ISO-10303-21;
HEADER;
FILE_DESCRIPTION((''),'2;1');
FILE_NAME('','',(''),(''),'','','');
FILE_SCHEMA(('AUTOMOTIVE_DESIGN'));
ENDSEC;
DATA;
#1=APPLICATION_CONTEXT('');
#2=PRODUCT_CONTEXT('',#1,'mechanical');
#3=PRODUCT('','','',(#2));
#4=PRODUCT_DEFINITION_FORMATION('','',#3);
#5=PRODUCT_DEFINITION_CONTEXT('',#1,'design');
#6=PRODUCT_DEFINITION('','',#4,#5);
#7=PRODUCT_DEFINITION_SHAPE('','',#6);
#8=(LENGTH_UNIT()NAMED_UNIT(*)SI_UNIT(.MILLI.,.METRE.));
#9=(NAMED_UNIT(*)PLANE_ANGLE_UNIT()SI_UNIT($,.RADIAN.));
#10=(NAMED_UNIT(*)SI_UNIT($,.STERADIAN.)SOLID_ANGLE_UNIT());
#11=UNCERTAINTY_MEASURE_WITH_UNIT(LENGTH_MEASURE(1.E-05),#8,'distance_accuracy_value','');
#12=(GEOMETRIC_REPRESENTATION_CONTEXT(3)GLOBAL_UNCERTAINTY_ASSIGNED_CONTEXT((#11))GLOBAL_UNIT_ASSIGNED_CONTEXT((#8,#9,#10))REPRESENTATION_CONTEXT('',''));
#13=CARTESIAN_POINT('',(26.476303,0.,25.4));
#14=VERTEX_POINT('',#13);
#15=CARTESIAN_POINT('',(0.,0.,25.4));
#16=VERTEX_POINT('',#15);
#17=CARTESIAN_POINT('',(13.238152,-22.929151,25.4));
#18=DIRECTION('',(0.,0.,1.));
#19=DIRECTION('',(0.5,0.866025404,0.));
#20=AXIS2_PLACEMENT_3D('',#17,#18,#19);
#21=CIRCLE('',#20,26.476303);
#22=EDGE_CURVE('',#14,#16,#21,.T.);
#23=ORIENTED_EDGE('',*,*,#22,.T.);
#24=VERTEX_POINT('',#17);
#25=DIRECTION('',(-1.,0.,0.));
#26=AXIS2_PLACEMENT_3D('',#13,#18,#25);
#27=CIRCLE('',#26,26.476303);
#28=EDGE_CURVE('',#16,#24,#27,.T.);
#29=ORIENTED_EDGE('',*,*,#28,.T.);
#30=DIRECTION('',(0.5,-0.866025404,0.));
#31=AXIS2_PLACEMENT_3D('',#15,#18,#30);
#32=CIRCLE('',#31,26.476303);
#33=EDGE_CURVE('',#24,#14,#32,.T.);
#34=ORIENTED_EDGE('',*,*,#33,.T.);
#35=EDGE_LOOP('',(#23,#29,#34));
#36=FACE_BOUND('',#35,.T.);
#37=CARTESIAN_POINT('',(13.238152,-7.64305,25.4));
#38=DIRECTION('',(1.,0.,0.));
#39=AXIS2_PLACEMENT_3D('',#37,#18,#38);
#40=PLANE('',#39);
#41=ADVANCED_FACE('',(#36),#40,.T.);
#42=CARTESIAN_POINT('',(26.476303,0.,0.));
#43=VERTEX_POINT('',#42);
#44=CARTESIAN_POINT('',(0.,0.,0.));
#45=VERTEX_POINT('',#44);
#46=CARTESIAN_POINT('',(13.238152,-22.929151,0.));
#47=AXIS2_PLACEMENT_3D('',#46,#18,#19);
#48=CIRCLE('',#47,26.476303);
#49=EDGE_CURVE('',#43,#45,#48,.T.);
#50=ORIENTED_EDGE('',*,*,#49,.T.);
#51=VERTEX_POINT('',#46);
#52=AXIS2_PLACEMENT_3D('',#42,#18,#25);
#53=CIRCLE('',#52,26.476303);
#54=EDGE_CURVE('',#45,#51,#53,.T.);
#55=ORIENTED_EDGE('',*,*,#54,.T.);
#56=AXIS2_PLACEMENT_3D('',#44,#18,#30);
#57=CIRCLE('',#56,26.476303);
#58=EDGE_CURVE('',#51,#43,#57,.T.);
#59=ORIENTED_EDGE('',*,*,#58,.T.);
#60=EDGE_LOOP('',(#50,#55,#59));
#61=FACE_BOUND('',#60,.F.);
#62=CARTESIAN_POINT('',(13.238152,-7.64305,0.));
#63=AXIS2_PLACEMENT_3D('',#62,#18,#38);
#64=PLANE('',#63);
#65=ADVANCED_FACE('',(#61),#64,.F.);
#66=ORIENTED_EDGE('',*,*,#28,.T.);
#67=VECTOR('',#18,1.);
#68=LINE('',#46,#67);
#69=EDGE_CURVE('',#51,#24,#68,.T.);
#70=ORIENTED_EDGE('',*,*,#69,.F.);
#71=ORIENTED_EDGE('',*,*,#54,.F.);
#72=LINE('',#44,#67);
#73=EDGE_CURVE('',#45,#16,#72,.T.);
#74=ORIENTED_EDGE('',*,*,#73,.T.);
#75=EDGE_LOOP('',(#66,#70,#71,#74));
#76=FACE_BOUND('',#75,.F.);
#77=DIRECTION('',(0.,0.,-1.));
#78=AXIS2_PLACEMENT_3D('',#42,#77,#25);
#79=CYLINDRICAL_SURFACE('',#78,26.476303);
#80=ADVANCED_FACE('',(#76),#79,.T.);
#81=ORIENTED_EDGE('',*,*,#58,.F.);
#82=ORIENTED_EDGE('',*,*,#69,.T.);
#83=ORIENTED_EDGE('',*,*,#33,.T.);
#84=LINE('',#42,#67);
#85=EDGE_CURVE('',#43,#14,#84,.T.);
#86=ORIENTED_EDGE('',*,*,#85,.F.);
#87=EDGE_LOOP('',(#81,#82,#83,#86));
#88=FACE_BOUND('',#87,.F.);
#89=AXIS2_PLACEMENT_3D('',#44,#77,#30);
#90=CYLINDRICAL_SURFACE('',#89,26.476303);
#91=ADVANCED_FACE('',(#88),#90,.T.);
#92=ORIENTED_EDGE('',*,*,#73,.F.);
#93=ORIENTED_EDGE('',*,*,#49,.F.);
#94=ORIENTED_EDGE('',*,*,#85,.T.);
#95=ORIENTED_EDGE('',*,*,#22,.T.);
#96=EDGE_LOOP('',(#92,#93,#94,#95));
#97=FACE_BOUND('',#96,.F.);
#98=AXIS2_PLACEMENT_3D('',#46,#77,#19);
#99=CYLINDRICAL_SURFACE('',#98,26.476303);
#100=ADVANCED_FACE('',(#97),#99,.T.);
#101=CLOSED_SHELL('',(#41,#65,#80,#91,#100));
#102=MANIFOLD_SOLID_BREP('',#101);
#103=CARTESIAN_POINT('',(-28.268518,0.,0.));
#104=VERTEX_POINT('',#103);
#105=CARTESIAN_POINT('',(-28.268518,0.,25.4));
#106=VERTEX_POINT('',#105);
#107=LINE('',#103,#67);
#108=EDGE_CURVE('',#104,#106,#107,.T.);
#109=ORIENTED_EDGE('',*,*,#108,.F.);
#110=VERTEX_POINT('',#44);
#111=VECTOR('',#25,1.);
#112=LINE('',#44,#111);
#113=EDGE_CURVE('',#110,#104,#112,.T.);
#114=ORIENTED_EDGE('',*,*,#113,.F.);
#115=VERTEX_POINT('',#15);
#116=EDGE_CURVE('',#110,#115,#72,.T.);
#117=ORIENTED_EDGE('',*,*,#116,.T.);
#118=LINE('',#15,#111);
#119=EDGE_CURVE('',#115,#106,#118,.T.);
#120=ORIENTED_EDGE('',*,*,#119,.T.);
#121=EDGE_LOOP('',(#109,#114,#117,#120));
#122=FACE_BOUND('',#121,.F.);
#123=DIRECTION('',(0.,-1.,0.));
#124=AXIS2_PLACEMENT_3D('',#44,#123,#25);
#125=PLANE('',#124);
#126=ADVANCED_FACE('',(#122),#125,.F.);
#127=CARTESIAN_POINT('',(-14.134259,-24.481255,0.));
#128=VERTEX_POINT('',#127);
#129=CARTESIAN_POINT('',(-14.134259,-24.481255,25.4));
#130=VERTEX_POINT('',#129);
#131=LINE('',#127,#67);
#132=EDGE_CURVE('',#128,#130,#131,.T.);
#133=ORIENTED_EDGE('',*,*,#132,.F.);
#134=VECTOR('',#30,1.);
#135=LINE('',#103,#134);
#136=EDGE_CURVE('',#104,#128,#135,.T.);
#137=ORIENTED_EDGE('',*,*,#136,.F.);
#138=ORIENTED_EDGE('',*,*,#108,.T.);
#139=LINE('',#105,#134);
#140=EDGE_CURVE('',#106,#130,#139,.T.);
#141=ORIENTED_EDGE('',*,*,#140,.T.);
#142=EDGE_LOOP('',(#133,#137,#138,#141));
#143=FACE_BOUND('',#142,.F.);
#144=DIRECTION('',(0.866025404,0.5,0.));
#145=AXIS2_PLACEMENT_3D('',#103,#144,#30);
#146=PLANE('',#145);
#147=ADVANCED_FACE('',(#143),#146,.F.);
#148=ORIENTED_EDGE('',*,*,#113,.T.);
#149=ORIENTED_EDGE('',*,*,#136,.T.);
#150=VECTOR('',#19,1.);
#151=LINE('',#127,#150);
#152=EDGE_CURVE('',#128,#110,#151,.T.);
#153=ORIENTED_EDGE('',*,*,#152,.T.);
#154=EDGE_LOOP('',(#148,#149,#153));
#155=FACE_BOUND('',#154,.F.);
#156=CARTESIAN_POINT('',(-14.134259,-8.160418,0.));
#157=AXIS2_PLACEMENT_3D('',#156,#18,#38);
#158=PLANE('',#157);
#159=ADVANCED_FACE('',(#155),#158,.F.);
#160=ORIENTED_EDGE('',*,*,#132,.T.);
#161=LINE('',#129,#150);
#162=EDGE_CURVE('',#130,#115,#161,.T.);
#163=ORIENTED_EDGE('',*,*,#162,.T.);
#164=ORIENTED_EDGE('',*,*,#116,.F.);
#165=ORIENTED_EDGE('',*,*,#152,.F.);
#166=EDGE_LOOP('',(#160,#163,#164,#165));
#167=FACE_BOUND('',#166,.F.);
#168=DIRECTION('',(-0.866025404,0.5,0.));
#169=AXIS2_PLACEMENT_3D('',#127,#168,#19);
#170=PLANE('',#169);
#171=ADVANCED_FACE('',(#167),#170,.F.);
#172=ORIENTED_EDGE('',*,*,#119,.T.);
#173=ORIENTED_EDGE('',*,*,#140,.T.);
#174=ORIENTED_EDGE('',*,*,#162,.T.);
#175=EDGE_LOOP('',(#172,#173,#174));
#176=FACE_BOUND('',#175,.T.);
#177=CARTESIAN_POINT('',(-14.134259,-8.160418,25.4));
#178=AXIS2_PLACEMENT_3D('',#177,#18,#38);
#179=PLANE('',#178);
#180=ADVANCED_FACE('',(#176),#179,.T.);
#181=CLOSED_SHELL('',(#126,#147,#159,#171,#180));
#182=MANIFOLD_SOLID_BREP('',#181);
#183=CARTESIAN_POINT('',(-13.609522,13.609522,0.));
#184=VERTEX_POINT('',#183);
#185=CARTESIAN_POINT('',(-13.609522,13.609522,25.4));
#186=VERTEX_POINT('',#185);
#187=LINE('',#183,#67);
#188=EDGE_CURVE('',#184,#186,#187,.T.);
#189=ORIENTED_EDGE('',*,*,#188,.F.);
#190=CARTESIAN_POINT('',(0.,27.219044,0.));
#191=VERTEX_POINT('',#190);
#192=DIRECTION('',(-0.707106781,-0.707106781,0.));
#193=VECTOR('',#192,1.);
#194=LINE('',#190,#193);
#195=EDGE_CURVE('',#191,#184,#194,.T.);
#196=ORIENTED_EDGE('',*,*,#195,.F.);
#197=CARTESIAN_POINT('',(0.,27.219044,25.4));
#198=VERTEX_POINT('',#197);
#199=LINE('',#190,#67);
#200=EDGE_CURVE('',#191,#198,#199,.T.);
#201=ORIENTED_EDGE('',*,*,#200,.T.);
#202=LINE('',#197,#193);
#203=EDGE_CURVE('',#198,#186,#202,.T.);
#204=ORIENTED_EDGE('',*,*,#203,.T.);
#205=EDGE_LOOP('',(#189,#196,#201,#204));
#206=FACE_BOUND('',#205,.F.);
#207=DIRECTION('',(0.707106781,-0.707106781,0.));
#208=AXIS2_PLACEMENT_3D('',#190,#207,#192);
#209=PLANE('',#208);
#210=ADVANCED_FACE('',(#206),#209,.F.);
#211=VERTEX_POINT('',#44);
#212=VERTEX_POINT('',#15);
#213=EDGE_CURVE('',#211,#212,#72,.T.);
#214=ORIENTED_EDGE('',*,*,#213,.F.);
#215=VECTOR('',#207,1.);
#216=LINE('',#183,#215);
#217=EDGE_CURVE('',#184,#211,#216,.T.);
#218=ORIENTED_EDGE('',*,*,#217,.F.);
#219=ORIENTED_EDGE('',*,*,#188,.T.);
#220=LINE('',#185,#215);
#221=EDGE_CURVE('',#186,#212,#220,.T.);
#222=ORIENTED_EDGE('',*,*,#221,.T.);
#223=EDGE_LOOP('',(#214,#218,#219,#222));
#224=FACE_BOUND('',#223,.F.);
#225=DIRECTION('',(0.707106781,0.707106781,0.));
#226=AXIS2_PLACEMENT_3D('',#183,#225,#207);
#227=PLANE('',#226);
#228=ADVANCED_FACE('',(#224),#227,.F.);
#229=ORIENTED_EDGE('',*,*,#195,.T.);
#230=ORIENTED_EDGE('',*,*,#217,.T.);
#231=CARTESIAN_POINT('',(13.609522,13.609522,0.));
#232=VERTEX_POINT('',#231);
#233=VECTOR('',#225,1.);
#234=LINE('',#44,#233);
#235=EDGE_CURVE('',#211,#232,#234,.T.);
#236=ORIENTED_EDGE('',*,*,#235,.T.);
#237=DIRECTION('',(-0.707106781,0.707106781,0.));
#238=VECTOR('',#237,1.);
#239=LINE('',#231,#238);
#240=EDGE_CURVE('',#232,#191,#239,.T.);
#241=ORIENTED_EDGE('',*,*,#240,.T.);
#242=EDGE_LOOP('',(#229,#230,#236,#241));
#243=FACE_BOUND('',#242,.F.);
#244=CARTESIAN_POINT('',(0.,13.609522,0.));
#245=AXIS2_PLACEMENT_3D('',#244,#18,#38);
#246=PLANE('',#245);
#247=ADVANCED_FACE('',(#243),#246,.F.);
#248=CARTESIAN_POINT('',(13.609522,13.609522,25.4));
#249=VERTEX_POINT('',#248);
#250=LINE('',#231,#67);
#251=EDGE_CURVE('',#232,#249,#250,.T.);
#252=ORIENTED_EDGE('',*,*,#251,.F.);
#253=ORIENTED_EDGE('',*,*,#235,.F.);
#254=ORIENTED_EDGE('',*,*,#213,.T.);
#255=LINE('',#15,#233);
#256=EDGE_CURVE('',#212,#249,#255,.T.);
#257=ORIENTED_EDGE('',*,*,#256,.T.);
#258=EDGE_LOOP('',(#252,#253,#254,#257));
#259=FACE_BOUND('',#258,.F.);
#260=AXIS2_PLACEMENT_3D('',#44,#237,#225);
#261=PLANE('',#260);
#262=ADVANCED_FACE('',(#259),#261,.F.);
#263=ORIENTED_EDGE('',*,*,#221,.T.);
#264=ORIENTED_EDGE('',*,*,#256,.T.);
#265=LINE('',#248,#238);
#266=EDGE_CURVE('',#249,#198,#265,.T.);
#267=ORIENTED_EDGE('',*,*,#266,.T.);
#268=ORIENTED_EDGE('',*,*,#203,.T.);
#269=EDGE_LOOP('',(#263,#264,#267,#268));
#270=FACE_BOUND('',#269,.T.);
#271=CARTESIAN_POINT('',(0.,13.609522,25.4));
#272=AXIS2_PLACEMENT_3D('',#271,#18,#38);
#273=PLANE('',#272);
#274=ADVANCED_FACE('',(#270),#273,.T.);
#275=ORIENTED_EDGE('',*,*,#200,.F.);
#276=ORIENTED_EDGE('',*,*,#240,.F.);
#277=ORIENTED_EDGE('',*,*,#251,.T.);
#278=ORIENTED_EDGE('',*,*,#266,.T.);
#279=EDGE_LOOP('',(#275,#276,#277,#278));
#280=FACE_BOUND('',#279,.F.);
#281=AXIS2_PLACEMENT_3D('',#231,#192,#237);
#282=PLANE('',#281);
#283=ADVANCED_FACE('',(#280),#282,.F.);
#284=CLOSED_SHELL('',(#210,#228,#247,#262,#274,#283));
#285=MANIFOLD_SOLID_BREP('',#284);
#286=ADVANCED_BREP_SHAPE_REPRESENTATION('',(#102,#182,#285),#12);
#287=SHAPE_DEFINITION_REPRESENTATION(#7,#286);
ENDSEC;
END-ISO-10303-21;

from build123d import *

# Parameters (mm, degrees)
F1_DEPTH = 25.4
F3_DEPTH = 25.4
F5_DEPTH = 25.4


with BuildPart() as f1:
    # F0 (on Top) → F1 (new body)
    with BuildSketch(Plane.XY):
        Polygon((0, 0), (-28.2685179263, 0), (-14.1342589632, -24.4812546515), align=None)
    extrude(amount=F1_DEPTH)


with BuildPart() as f3:
    # F2 (on Top) → F3 (new body)
    with BuildSketch(Plane.XY):
        with BuildLine():
            ThreePointArc((13.2381515749, -22.9291511259), (22.9291511259, -13.2381515749), (26.4763031497, 0))
            ThreePointArc((26.4763031497, 0), (13.2381515749, 3.5471520238), (0, 0))
            ThreePointArc((0, 0), (3.5471520238, -13.2381515749), (13.2381515749, -22.9291511259))
        make_face()
    extrude(amount=F3_DEPTH)


with BuildPart() as f5:
    # F4 (on Top) → F5 (new body)
    with BuildSketch(Plane.XY):
        Polygon((13.6095220223, 13.6095220223), (0, 27.2190440446), (-13.6095220223, 13.6095220223), (0, 0), align=None)
    extrude(amount=F5_DEPTH)


solid = Compound([f1.part, f3.part, f5.part])
